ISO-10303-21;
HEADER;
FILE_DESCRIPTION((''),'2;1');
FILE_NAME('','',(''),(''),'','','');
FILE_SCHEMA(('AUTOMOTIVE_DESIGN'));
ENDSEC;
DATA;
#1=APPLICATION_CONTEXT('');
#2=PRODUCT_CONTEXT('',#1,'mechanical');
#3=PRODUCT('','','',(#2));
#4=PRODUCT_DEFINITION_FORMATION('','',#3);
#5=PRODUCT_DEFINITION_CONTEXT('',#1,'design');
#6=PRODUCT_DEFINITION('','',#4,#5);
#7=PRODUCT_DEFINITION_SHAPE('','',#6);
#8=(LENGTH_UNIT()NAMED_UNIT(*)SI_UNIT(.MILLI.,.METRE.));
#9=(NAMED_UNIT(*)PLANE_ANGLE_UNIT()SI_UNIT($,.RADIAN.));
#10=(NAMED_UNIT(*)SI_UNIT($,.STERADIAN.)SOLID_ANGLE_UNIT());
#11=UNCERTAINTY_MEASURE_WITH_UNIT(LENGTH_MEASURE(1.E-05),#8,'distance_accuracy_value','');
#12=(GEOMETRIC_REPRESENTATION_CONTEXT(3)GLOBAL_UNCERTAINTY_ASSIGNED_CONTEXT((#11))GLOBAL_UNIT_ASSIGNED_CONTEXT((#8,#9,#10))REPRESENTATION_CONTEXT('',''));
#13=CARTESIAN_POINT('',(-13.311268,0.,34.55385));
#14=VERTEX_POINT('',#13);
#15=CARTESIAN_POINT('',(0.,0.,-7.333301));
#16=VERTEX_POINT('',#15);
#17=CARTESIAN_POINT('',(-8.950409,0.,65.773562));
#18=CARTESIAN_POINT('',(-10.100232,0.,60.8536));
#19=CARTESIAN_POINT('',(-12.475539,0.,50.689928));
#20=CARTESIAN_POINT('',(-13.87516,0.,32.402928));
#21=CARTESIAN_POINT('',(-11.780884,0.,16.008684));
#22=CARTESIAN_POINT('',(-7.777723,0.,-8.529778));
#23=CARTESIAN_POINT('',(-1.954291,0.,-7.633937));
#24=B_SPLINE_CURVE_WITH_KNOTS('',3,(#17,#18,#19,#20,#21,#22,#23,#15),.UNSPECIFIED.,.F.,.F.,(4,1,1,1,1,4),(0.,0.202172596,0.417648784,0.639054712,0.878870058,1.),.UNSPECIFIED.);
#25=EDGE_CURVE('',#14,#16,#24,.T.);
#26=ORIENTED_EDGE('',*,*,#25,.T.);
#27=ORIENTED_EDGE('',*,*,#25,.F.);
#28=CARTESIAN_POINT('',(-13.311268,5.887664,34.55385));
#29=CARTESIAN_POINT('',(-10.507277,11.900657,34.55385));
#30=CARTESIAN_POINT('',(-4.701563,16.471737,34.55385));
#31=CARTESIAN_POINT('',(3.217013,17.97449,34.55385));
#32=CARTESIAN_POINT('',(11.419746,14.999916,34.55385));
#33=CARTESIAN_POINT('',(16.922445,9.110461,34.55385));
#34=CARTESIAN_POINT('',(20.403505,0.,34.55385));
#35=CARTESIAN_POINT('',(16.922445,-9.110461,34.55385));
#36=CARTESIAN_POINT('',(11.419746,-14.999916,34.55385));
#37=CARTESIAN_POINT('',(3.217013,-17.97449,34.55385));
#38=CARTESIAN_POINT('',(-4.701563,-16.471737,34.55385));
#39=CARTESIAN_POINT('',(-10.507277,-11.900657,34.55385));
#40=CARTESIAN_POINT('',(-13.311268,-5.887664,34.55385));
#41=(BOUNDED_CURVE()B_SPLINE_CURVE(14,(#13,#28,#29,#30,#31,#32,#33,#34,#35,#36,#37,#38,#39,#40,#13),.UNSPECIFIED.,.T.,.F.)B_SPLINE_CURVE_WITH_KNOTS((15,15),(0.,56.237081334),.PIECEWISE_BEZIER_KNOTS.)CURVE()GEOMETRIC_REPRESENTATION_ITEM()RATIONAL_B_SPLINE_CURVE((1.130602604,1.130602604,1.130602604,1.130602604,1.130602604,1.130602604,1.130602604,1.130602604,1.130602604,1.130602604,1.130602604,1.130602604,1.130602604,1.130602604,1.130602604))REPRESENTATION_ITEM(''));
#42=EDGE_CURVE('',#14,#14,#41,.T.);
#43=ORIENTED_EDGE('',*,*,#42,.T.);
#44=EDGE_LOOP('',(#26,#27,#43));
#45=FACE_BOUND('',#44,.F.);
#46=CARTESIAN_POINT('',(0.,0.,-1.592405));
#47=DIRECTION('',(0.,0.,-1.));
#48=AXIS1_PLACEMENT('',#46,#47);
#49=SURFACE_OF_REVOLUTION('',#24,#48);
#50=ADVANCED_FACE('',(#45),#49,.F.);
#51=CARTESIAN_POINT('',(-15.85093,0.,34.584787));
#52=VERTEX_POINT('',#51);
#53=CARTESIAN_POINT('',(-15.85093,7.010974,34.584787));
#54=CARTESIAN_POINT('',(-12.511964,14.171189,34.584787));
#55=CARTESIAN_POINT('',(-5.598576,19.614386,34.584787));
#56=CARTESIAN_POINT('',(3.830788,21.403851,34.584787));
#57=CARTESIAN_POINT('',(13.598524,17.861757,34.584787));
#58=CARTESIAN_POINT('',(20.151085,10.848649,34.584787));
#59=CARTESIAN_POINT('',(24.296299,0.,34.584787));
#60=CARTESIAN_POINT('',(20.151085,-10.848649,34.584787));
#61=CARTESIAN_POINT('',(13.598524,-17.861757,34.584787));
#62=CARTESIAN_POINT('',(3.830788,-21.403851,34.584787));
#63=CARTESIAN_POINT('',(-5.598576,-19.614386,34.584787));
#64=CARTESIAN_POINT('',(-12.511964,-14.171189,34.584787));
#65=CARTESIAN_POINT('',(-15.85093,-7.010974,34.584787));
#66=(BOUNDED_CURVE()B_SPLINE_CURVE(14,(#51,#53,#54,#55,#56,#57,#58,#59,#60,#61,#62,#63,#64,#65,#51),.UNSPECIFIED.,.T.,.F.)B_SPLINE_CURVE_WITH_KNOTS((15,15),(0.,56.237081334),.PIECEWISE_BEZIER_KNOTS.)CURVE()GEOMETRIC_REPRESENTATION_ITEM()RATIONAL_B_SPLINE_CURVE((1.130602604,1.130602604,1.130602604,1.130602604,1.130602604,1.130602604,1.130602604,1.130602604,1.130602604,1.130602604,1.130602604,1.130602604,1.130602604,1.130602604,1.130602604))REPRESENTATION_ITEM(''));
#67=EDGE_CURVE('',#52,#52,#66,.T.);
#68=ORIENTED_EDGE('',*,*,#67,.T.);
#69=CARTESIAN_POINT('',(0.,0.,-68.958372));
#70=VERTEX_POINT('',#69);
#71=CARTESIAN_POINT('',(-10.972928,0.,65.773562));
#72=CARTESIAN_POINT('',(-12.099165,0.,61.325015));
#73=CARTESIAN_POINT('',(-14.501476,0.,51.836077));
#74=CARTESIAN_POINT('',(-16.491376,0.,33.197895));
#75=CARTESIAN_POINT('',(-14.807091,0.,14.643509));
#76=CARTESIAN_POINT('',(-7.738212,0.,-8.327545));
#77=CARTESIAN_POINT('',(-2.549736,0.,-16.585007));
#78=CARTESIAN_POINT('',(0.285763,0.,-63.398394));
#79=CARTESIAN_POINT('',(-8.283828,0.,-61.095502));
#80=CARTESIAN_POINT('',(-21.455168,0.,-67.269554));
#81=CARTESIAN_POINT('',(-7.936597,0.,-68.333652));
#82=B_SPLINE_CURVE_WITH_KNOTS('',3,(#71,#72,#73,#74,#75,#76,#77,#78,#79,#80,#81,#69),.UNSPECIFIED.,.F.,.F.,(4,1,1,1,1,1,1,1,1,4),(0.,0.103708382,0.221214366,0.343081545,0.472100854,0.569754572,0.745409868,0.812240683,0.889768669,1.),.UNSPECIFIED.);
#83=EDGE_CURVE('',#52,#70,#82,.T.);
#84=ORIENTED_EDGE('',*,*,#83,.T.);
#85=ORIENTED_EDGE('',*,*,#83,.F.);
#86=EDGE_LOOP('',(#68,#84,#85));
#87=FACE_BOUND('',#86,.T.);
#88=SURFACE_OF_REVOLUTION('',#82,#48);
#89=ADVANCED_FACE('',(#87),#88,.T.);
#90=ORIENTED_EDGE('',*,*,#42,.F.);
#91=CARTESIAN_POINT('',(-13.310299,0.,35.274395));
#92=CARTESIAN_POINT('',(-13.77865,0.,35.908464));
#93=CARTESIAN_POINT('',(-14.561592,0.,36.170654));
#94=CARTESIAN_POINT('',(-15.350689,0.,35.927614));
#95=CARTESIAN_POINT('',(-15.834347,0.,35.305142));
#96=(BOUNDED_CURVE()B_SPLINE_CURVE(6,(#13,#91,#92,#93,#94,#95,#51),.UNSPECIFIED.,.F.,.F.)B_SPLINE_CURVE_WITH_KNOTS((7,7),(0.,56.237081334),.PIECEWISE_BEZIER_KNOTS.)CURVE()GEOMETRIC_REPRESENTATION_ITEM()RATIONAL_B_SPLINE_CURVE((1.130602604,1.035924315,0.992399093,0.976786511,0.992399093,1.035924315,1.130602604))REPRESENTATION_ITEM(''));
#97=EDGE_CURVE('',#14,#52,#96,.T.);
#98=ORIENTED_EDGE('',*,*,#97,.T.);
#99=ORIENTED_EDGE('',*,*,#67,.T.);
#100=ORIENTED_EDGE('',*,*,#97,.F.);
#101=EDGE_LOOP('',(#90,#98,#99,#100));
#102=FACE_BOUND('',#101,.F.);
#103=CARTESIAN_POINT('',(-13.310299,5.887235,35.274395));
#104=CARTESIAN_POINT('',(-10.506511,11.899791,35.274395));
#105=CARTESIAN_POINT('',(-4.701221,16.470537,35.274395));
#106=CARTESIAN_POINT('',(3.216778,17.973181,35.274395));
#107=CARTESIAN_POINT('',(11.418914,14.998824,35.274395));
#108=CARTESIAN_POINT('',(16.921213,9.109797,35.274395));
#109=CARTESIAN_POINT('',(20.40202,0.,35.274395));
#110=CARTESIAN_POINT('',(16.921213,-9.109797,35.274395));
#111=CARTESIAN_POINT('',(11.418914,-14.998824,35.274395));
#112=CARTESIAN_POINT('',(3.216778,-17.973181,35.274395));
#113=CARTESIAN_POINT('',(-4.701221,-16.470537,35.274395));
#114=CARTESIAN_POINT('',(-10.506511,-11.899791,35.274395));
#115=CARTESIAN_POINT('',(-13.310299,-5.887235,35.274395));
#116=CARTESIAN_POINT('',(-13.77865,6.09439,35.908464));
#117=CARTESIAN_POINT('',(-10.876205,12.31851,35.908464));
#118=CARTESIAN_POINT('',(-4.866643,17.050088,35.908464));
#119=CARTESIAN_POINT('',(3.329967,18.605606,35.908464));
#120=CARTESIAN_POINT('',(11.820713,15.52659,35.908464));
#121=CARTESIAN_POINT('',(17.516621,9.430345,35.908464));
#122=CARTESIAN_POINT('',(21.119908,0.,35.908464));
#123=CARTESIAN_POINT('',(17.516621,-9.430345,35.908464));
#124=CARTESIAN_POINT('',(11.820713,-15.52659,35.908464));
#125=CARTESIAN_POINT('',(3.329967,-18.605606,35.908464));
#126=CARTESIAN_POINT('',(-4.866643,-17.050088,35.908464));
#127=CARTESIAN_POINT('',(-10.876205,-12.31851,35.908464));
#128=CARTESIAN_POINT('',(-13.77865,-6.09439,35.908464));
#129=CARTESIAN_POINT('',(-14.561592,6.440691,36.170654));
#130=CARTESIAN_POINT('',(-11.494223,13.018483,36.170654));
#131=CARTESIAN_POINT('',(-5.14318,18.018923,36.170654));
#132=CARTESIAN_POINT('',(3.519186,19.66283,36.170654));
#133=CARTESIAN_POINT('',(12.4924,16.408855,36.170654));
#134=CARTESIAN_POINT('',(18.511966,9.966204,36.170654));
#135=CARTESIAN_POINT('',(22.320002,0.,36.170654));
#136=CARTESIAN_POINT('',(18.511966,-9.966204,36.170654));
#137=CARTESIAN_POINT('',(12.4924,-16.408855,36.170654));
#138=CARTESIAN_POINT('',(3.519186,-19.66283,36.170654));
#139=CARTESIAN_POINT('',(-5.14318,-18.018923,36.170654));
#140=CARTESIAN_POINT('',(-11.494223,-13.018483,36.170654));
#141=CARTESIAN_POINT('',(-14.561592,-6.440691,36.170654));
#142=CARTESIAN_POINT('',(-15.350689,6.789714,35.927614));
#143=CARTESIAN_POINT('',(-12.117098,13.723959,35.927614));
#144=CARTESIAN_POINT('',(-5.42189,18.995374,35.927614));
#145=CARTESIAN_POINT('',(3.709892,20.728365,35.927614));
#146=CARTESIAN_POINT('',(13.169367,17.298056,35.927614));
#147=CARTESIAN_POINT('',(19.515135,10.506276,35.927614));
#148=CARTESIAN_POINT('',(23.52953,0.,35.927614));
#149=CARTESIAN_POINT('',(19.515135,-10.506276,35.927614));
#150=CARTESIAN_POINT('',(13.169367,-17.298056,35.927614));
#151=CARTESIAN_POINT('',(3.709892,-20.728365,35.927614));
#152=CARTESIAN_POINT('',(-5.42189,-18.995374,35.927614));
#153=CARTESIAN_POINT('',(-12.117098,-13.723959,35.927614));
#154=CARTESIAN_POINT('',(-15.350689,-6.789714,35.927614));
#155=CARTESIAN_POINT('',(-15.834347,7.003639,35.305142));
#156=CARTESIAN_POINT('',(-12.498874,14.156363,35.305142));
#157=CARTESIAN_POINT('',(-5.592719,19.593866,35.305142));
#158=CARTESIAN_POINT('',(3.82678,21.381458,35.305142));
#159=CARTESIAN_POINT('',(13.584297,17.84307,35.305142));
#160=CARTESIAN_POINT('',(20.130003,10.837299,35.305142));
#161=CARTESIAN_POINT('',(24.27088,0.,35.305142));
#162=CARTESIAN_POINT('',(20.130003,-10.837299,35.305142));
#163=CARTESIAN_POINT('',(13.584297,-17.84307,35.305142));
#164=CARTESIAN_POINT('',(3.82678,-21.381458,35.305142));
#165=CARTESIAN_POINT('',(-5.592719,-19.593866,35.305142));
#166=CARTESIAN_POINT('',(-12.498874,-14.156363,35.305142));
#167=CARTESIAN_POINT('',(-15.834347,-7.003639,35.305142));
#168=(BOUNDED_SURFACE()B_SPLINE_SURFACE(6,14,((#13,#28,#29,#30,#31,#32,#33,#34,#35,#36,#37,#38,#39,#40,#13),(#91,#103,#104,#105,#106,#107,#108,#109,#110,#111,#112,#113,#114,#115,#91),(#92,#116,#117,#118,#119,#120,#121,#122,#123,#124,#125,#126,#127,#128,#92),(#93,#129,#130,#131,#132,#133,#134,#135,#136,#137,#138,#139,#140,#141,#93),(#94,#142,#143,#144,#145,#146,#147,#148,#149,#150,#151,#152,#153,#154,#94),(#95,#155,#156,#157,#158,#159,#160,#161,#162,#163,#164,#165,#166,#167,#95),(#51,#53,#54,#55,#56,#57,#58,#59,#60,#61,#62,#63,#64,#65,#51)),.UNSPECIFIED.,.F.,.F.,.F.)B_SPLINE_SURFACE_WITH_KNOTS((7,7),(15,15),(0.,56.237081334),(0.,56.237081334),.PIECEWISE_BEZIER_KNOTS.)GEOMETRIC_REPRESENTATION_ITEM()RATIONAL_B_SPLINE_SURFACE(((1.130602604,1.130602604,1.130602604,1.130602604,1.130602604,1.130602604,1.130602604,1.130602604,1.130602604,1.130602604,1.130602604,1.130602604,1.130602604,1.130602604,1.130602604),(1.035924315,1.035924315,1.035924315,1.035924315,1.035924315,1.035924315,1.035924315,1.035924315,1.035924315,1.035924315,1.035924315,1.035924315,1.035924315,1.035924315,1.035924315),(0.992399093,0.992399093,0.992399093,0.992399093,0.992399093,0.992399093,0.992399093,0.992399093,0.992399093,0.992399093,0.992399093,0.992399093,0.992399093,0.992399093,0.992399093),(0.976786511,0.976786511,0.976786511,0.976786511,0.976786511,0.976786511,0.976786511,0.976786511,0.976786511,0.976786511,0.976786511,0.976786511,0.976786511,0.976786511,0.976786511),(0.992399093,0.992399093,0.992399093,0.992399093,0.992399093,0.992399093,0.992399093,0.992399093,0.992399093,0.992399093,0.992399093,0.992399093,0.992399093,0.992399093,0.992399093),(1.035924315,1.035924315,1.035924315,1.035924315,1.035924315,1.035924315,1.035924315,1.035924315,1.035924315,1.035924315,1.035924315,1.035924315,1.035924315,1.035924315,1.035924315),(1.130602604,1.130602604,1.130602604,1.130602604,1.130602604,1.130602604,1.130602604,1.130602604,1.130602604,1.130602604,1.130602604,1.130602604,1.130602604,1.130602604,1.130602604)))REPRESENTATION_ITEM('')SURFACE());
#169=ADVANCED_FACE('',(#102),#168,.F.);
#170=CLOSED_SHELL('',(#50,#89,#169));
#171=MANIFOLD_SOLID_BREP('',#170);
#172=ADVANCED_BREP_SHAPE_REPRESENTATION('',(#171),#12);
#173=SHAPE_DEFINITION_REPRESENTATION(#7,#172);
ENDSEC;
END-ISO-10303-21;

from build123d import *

# Parameters (mm, degrees)
F3_R = 1.27


# Not quite as in the source:
# - a fillet or chamfer that OpenCascade refuses, or shapes differently, is made with other operations: its cross-section is extruded or revolved along the edge and cut away or added


with BuildPart() as f1:
    # F0 (on Front) → F1 (revolve)
    with BuildSketch(Plane.XZ):
        with BuildLine():
            add(Edge.make_bspline(
                [(-8.9504094794, 65.7735615969), (-10.1002320619, 60.8536000039), (-12.4755391669, 50.6899278797), (-13.8751598665, 32.4029277885), (-11.7808838385, 16.0086835126), (-7.7777227562, -8.5297782559), (-1.9542906374, -7.6339367652), (0, -7.3333005421)],
                knots=[0, 0, 0, 0, 0.2021725958, 0.4176487838, 0.6390547122, 0.8788700577, 1, 1, 1, 1], degree=3))
            Line((-8.9504094794, 65.7735615969), (-10.9729282558, 65.7735615969))
            add(Edge.make_bspline(
                [(-10.9729282558, 65.7735615969), (-12.099165275, 61.3250150964), (-14.5014764715, 51.8360772581), (-16.49137647, 33.1978948569), (-14.807091019, 14.6435085166), (-7.7382118319, -8.3275453358), (-2.5497359939, -16.585006741), (0.2857630852, -63.3983935632), (-8.2838276602, -61.0955024284), (-21.4551680801, -67.269553999), (-7.9365971981, -68.3336521274), (0, -68.9583718777)],
                knots=[0, 0, 0, 0, 0.1037083822, 0.2212143656, 0.3430815454, 0.4721008542, 0.5697545725, 0.7454098678, 0.8122406833, 0.8897686686, 1, 1, 1, 1], degree=3))
            Line((0, -68.9583718777), (0, -7.3333005421))
        make_face()
    revolve(axis=Axis((0, 0, -1.5924051404), (0, 0, -1)))

    # F2: fillet of radius 5.08 on 1 edges, made by hand

    # F2_s1 → F2_t2 (revolve, cut)
    with BuildSketch(Plane.XZ):
        with BuildLine():
            ThreePointArc((-11.8344780682, 62.3448166475), (-10.7908673283, 64.3943207448), (-8.9504094794, 65.7735615969))
            Line((-8.9504094794, 65.7735615969), (-8.9913521089, 65.8665468704))
            ThreePointArc((-8.9913521089, 65.8665468704), (-9.9616688676, 65.8751615969), (-10.9729282558, 65.8751615969))
            Line((-10.9729282558, 65.8751615969), (-11.0714208398, 65.7984969312))
            ThreePointArc((-11.0714208398, 65.7984969312), (-11.5045182242, 64.0845684134), (-11.9331020694, 62.3692270221))
            Line((-11.9331020694, 62.3692270221), (-11.8344780682, 62.3448166475))
        make_face()
    revolve(axis=Axis((0, 0, 65.7735615969), (0, 0, -1)), mode=Mode.SUBTRACT)

    # F3
    f3_edges = [f1.edges().sort_by_distance(p)[0] for p in [
        (8.950409, 0, 65.773562),
    ]]
    fillet(f3_edges, radius=F3_R)


solid = f1.part
